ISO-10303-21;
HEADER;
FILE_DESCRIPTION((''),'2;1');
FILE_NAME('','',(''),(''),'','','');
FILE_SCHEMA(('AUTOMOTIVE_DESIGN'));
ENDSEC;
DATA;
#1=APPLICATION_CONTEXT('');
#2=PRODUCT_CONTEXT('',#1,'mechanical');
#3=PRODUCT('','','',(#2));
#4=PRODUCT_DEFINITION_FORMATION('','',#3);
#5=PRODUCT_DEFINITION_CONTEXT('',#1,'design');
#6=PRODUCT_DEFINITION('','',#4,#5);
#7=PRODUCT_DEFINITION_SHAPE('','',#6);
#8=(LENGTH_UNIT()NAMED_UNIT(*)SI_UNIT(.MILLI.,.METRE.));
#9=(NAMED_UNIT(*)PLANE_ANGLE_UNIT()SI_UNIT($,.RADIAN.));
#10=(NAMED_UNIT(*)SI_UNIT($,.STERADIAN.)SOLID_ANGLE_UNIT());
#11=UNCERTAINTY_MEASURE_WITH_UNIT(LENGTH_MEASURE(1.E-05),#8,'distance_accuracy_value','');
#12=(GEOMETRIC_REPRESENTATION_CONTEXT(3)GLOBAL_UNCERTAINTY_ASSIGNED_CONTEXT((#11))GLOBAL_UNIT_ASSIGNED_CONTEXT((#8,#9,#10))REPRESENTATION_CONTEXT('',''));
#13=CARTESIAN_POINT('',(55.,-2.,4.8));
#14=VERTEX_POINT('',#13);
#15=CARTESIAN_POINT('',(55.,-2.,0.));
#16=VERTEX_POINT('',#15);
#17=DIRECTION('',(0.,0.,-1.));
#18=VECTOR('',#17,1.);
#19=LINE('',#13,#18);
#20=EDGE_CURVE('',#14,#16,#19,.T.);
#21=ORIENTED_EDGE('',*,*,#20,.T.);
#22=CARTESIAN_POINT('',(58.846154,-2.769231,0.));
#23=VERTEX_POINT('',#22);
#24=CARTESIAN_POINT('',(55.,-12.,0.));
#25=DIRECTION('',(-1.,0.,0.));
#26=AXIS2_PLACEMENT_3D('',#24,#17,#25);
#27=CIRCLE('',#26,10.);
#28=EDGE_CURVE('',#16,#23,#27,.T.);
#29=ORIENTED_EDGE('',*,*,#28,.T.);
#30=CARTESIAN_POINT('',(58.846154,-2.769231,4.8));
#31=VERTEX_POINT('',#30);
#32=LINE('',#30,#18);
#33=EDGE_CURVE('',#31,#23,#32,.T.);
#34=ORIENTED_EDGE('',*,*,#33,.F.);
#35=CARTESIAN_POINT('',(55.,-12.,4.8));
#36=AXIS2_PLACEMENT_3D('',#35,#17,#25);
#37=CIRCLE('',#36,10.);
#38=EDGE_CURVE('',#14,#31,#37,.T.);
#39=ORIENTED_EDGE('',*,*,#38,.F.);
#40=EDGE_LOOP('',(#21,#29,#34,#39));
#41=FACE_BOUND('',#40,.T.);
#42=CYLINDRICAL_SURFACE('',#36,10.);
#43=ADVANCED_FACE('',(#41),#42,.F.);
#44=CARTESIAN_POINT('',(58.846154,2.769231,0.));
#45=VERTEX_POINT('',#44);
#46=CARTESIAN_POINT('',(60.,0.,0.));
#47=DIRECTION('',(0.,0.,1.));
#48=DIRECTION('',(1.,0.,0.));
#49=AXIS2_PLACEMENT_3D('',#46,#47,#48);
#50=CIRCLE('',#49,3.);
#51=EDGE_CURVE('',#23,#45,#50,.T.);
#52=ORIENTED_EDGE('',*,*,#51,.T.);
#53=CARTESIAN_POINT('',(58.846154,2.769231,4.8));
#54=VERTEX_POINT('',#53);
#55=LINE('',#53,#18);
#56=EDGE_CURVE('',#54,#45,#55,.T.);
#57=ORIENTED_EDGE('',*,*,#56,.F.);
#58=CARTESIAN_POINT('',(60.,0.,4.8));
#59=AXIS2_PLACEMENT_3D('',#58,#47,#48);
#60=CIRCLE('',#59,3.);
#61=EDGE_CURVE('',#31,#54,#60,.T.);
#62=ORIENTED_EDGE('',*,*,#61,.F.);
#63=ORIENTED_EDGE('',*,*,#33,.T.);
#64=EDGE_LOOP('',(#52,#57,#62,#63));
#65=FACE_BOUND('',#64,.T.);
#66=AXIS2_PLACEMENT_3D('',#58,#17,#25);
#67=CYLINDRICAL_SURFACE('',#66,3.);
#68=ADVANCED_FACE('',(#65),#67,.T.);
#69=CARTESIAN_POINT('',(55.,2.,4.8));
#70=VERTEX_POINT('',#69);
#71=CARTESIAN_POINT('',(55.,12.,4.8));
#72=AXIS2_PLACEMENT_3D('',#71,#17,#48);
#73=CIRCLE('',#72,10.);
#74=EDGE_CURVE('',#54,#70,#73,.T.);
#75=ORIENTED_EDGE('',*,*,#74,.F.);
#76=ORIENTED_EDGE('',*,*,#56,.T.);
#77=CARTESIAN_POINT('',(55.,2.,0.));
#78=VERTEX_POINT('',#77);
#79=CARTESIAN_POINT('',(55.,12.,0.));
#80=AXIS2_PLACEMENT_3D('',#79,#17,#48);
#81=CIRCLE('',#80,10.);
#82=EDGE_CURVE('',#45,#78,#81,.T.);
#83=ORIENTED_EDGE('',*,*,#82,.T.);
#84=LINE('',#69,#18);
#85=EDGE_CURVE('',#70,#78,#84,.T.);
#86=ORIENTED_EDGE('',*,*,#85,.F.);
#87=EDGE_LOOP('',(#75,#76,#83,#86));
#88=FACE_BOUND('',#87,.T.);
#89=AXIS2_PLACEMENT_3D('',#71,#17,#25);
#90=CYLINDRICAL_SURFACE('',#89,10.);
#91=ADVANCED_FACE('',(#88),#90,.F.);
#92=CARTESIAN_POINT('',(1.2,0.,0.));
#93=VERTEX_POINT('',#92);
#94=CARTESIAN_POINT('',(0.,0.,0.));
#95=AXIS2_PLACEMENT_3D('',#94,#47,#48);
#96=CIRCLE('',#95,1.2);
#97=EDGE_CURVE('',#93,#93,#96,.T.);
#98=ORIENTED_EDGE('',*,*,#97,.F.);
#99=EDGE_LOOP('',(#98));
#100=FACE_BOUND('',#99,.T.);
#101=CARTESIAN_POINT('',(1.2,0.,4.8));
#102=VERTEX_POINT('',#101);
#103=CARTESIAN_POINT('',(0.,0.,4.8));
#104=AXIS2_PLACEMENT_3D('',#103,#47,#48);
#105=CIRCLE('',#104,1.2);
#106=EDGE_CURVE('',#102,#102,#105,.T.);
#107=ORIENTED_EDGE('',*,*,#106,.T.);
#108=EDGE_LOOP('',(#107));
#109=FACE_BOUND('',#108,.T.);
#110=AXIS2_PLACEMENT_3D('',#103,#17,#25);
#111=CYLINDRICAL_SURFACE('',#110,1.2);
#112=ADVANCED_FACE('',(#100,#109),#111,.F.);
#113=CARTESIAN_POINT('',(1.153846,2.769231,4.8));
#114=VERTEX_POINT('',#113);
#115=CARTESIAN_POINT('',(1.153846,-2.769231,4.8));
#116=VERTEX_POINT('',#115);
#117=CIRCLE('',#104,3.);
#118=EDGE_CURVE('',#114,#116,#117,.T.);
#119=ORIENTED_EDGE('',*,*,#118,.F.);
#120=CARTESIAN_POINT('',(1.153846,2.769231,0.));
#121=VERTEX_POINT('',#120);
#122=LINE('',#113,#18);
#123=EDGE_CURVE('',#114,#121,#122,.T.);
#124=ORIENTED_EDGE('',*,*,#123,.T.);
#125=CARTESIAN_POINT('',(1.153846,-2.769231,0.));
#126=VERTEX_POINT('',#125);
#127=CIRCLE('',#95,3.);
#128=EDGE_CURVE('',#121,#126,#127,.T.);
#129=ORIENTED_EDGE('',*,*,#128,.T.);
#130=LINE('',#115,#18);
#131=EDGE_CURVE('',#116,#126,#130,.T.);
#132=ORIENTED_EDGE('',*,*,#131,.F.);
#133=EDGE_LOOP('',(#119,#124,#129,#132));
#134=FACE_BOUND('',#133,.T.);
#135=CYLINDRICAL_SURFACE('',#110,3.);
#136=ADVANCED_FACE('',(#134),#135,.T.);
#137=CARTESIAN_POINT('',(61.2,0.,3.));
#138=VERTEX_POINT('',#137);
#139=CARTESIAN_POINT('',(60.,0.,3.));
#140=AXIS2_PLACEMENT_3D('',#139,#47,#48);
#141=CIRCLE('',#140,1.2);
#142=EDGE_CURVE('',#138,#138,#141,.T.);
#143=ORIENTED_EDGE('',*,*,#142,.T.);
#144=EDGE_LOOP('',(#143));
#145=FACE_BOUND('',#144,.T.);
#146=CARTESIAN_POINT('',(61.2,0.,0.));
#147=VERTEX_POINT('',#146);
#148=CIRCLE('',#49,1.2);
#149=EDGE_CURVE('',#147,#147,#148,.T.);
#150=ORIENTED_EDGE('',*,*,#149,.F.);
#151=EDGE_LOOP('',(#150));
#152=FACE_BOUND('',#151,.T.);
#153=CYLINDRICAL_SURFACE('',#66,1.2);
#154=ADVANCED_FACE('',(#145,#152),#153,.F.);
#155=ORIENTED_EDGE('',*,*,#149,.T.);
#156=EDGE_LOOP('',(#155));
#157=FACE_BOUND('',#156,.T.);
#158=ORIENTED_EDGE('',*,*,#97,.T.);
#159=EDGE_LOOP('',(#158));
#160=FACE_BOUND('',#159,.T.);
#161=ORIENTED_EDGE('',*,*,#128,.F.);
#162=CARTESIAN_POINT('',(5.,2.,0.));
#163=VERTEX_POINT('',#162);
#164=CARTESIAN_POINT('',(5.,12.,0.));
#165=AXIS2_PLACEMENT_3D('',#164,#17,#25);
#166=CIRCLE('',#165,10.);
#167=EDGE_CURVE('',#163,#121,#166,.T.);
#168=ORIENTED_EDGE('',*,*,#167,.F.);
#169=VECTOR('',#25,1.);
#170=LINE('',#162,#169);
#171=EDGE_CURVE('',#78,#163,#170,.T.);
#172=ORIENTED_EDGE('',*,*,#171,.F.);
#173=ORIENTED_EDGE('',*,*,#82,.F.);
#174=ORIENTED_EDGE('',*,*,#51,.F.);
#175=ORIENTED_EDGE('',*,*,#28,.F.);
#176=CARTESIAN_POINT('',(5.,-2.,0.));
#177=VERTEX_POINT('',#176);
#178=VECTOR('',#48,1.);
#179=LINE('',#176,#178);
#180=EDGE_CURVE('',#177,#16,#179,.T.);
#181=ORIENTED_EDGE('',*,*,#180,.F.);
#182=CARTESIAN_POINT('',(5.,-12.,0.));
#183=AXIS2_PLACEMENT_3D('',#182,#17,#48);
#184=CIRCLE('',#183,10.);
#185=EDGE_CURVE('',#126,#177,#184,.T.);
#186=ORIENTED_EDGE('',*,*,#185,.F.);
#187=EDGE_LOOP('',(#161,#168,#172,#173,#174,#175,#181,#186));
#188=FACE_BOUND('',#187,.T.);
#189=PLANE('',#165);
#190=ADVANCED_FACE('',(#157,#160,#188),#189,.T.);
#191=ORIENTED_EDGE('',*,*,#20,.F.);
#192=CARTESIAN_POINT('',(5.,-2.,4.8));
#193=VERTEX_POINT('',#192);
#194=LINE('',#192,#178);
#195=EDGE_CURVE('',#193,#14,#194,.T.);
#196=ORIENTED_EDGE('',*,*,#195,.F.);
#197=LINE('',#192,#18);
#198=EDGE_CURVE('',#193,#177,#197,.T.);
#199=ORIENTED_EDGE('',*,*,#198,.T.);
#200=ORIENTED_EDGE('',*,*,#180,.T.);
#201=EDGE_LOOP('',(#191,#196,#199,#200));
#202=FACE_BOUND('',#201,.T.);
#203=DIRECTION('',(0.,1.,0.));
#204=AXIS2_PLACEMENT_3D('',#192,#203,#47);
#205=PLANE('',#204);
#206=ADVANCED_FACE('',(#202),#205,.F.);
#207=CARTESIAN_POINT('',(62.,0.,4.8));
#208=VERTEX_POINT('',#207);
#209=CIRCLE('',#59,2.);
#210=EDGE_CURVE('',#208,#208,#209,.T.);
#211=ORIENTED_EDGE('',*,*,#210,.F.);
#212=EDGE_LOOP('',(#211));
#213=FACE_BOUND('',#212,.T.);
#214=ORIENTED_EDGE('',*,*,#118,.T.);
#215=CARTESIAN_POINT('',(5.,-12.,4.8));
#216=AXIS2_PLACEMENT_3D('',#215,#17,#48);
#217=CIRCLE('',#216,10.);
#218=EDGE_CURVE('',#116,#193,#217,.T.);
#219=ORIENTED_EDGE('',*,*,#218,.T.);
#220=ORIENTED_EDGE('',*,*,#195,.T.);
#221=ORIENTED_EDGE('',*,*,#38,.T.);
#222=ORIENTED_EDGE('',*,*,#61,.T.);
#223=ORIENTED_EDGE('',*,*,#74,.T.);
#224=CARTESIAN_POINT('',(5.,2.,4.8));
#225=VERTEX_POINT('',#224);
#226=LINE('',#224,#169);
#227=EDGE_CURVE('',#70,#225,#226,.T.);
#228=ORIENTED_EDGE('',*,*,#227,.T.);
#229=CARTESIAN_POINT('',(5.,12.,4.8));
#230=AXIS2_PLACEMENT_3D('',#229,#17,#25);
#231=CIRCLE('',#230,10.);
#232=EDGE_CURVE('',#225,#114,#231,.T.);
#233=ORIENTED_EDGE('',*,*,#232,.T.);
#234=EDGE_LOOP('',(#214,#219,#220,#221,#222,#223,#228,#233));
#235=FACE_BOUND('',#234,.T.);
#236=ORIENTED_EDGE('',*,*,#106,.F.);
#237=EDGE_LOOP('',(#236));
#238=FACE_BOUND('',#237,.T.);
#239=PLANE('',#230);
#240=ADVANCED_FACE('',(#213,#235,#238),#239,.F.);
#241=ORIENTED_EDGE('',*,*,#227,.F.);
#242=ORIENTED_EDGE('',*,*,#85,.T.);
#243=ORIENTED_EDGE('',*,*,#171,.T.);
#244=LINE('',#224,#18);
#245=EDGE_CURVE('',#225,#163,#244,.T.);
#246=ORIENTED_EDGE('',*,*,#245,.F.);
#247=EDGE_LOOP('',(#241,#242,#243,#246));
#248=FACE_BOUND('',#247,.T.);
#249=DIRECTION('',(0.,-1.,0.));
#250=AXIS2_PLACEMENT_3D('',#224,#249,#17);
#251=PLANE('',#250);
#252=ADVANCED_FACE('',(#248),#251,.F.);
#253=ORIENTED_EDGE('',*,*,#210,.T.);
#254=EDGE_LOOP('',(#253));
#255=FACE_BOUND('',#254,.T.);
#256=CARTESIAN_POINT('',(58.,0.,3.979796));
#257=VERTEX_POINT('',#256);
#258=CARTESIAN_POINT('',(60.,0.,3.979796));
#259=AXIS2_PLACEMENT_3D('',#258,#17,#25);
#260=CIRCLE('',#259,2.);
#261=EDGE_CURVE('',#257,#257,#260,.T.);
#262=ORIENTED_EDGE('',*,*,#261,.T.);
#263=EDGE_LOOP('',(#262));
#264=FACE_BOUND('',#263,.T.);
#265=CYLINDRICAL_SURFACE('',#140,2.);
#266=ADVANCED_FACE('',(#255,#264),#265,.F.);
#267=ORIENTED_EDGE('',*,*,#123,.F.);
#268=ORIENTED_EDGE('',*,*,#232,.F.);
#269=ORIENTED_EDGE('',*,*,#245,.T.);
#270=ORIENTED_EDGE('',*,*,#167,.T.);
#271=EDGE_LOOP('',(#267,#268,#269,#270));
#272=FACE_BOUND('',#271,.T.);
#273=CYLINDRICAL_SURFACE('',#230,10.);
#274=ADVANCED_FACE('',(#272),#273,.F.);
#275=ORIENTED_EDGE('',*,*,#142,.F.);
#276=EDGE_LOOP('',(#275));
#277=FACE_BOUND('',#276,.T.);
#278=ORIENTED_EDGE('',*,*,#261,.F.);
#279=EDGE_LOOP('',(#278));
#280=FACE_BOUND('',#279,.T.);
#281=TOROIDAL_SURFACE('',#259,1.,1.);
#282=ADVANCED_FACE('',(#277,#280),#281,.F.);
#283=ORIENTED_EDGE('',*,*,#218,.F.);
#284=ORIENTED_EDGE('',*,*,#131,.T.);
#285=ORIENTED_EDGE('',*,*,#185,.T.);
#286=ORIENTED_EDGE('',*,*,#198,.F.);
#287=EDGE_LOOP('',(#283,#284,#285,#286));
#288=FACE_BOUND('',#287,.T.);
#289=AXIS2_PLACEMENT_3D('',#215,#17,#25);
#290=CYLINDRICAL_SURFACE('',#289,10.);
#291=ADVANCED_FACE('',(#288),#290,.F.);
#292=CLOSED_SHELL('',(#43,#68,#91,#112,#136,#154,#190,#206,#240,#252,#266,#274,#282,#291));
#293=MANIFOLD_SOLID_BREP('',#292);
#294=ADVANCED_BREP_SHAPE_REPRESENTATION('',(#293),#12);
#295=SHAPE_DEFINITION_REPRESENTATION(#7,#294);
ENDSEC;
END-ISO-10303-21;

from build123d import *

# Parameters (mm, degrees)
SKETCH1_R           = 1.2
BOSS_EXTRUDE1_DEPTH = 4.8
SKETCH2_R           = 2
CUT_EXTRUDE1_DEPTH  = 1.8
FILLET1_R           = 1


with BuildPart() as part:
    # Sketch1 → Boss-Extrude1 (new body)
    with BuildSketch(Plane.XY):
        with BuildLine():
            Line((5, -2), (55, -2))
            ThreePointArc((55, -2), (56.961161351, -2.194193243), (58.846153846, -2.769230769))
            ThreePointArc((58.846153846, -2.769230769), (63, 0), (58.846153846, 2.769230769))
            ThreePointArc((58.846153846, 2.769230769), (56.961161351, 2.194193243), (55, 2))
            Line((55, 2), (5, 2))
            ThreePointArc((5, 2), (3.038838649, 2.194193243), (1.153846154, 2.769230769))
            ThreePointArc((1.153846154, 2.769230769), (-3, 0), (1.153846154, -2.769230769))
            ThreePointArc((1.153846154, -2.769230769), (3.038838649, -2.194193243), (5, -2))
        make_face()
        Circle(SKETCH1_R, mode=Mode.SUBTRACT)
        with Locations((60, 0)):
            Circle(SKETCH1_R, mode=Mode.SUBTRACT)
    extrude(amount=BOSS_EXTRUDE1_DEPTH)

    # Sketch2 → Cut-Extrude1 (cut)
    with BuildSketch(Plane.XY.offset(4.8)):
        with Locations((60, 0)):
            Circle(SKETCH2_R)
    extrude(amount=-CUT_EXTRUDE1_DEPTH, mode=Mode.SUBTRACT)

    # Fillet1
    # the kernel refuses this fillet: 1 mm, written as the material it adds along each edge
    with BuildSketch(Plane(origin=(60, 0, 3), x_dir=(1, 0, 0), z_dir=(0, -1, 0))) as fillet1_piece_1:
        with BuildLine():
            CenterArc((1, 0.979795897), FILLET1_R, 281.536959033, 78.463040967)
            Line((1.2, 0), (1.204, -0.019595918))
            ThreePointArc((1.204, -0.019595918), (1.6, -0.02), (2, -0.02))
            Line((2, -0.02), (2.02, 0))
            Line((2.02, 0), (2.02, 0.979795897))
            Line((2.02, 0.979795897), (2, 0.979795897))
        make_face()
    revolve(axis=Axis((60, 0, 3), (0, 0, 1)))


solid = part.part
